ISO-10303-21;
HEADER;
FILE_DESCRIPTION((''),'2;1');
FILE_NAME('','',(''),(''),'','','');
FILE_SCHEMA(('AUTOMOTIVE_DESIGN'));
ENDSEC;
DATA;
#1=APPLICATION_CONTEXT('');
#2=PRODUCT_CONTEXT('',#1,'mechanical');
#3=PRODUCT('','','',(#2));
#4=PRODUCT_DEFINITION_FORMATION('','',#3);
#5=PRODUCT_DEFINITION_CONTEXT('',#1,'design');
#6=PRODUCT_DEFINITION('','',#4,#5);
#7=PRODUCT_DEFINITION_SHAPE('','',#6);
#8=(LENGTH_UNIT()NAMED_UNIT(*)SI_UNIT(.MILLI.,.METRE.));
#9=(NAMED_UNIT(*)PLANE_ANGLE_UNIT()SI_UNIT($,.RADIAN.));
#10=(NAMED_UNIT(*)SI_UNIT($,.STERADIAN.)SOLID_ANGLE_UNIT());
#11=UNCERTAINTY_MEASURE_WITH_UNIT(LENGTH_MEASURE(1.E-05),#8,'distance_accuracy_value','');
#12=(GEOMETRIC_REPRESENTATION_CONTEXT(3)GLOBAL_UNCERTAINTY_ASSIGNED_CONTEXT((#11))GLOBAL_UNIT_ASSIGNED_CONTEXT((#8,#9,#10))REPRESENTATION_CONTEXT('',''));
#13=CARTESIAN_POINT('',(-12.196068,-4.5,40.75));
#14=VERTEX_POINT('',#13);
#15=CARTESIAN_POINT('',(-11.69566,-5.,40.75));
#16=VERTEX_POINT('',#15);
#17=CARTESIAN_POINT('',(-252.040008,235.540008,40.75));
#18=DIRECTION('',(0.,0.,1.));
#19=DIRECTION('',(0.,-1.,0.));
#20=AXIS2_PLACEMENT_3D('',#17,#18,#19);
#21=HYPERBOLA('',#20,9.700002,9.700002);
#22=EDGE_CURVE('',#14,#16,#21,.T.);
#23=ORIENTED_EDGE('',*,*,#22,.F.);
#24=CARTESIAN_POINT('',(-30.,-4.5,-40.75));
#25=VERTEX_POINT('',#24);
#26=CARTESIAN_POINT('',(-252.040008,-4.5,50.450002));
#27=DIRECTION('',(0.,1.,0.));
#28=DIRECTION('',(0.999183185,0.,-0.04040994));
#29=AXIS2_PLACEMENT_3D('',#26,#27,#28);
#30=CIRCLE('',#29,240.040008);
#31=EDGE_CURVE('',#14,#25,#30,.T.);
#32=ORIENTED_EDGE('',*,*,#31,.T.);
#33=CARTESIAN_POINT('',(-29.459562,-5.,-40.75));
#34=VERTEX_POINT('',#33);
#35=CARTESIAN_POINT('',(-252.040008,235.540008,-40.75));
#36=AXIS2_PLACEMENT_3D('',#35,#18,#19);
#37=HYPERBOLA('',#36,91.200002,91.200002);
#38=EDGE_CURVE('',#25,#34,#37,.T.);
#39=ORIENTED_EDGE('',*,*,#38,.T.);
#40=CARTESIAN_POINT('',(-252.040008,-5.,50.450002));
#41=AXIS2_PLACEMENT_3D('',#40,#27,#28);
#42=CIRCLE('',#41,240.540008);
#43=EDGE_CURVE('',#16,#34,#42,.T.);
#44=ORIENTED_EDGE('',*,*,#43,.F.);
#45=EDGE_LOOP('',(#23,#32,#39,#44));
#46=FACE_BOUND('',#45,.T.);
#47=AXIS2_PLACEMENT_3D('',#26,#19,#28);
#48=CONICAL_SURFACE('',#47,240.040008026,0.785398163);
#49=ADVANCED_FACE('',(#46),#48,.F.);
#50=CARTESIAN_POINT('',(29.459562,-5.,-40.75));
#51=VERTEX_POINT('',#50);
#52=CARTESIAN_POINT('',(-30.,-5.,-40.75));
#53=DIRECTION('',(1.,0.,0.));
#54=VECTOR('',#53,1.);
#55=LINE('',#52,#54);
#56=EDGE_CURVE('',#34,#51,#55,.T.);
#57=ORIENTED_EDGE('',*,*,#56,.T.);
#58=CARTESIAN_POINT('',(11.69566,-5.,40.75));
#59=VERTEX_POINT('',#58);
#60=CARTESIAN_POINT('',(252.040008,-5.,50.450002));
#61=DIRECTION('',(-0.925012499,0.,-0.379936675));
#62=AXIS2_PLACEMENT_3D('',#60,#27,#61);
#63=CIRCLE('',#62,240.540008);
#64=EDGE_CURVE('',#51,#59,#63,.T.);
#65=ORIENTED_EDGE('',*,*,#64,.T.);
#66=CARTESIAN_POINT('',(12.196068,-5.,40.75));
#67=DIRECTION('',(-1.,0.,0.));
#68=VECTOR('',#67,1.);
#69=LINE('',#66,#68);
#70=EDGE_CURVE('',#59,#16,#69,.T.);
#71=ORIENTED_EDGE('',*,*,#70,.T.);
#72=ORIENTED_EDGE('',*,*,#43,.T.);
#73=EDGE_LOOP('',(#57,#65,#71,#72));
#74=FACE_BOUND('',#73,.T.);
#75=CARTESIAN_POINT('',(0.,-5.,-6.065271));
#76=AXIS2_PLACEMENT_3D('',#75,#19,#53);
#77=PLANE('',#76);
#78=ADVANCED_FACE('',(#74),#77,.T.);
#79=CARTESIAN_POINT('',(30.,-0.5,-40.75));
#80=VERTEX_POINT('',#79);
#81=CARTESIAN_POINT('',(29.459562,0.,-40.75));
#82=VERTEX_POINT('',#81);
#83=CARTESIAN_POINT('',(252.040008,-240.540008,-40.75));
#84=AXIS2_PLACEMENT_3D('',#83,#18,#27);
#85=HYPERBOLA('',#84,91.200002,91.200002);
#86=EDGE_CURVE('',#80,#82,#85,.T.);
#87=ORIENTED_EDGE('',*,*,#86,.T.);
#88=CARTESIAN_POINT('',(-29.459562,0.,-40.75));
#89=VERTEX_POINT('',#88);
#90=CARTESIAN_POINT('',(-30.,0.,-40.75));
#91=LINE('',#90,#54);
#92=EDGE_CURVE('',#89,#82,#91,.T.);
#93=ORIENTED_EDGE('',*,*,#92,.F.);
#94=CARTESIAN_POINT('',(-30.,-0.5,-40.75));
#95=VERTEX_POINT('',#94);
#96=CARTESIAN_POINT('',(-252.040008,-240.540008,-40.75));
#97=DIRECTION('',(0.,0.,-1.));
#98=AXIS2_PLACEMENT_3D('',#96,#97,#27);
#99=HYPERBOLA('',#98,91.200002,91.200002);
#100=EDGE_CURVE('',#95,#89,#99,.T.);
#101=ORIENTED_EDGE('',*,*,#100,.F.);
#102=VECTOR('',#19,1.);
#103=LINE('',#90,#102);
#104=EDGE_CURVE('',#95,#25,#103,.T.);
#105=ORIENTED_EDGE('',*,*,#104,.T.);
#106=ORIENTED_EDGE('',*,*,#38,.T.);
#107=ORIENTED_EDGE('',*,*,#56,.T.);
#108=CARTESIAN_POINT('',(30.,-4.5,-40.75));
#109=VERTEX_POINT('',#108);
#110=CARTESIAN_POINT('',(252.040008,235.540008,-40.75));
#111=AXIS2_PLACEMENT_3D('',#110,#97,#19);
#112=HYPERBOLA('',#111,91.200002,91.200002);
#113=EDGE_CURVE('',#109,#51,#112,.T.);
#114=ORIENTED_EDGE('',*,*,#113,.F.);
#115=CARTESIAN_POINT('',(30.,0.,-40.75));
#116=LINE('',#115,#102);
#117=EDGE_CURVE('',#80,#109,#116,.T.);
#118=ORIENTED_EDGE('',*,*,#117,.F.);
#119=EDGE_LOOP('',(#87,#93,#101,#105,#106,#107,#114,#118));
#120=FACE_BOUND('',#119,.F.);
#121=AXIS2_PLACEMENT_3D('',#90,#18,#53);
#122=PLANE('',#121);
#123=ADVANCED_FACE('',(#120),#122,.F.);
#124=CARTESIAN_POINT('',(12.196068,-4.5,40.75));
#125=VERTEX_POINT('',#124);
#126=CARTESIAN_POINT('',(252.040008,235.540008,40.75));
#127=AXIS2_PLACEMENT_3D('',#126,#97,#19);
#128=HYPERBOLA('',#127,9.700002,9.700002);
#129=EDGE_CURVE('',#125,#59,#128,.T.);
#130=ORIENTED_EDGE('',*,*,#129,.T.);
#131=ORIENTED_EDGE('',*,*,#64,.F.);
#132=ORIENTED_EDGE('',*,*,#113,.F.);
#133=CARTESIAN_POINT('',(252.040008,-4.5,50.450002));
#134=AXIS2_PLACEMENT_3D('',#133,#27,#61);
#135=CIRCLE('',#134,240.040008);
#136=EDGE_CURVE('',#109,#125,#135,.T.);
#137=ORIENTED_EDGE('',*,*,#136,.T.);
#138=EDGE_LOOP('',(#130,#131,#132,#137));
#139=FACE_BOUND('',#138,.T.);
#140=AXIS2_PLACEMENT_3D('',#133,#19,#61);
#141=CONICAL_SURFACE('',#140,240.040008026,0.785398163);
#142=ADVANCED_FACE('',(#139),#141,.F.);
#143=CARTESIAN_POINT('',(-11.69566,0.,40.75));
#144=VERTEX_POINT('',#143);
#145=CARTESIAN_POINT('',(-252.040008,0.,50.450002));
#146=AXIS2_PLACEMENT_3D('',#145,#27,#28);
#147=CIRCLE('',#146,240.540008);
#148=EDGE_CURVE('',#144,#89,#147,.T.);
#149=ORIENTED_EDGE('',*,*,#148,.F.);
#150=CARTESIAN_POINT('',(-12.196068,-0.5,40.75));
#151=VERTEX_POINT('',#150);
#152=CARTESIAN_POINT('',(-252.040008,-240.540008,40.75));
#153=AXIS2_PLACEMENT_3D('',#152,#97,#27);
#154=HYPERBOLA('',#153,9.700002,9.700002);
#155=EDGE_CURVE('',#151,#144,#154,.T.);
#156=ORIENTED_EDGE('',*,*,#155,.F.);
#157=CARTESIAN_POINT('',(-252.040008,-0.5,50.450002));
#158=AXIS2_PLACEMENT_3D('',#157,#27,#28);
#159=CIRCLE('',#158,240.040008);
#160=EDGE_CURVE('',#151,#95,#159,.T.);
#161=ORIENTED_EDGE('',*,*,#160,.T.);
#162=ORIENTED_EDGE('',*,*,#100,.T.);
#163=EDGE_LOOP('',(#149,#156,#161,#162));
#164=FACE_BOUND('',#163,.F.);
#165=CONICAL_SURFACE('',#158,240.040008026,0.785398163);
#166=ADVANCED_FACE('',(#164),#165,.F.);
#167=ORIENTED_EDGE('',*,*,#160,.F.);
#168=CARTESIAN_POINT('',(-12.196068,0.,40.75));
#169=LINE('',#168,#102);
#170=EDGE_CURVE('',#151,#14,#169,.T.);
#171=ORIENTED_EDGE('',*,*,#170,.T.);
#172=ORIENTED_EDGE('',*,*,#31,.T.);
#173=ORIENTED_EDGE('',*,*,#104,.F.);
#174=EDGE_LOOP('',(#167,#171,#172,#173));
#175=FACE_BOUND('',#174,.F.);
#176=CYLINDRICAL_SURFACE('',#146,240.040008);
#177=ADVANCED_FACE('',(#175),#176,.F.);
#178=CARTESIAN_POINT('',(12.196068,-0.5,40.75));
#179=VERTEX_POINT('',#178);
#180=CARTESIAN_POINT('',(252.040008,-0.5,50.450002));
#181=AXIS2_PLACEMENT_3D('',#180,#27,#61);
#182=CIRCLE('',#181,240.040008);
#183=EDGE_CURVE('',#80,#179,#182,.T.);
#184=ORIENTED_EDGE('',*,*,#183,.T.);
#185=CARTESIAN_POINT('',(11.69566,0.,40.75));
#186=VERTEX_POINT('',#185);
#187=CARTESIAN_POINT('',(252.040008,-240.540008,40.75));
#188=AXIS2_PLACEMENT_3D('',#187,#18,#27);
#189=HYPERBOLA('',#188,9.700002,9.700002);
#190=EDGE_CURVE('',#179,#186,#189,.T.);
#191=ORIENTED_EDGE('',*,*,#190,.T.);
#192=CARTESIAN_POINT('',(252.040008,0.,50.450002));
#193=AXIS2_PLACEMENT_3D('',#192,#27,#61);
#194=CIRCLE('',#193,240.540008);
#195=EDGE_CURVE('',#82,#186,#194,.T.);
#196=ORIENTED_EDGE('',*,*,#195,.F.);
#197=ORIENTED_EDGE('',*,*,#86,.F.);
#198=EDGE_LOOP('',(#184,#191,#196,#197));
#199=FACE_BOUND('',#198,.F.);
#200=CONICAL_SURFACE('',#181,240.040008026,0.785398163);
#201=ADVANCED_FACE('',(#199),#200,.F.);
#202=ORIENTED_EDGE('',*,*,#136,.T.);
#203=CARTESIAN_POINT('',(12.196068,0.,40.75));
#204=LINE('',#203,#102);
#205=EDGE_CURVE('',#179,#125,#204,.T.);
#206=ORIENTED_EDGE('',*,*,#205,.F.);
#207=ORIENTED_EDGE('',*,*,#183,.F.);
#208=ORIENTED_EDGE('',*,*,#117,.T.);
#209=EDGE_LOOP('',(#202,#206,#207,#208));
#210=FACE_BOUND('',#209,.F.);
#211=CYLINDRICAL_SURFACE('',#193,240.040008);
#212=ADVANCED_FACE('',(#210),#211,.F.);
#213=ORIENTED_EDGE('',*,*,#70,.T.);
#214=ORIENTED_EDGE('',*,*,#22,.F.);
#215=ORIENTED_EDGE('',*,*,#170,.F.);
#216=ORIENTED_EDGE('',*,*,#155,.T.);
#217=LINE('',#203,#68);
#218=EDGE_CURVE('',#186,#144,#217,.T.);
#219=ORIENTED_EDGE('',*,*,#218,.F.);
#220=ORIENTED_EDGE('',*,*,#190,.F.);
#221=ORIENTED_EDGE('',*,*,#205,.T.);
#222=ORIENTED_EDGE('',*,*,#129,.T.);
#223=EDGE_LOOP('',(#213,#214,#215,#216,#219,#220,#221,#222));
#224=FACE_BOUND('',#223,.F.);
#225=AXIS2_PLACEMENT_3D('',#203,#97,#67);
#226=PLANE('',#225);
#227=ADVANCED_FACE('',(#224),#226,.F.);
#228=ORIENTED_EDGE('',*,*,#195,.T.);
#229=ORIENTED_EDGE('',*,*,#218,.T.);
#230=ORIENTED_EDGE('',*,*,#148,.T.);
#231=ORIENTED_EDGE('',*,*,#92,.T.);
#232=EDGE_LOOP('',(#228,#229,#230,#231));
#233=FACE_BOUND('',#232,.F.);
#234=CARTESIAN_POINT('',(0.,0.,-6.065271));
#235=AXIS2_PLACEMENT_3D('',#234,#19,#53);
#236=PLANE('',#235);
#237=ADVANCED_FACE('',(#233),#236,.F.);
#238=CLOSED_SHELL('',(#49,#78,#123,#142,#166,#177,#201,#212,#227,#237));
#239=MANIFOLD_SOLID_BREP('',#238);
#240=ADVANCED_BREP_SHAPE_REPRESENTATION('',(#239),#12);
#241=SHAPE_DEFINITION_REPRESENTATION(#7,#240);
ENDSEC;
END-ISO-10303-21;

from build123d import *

# Parameters (mm, degrees)
F1_DEPTH = 5
F2_SIZE  = 0.5


# Not quite as in the source:
# - ends of sketch curves that miss each other by under 0.0002 mm in the source are joined


with BuildPart() as f1:
    # F0 (on Front) → F1 (new body)
    with BuildSketch(Plane.XZ):
        with BuildLine():
            Line((12.196068, 40.75), (-12.196068, 40.75))
            ThreePointArc((-12.196068, 40.75), (-17.5303965634, -0.7793616591), (-30, -40.75))
            Line((-30, -40.75), (30, -40.75))
            ThreePointArc((30, -40.75), (17.5303965634, -0.7793616591), (12.196068, 40.75))
        make_face()
    extrude(amount=F1_DEPTH)

    # F2
    f2_edges = [f1.edges().sort_by_distance(p)[0] for p in [
        (-17.530397, 0, -0.779362),
        (-17.530397, -5, -0.779362),
        (17.530397, -5, -0.779362),
        (17.530397, 0, -0.779362),
    ]]
    chamfer(f2_edges, length=F2_SIZE)


solid = f1.part
